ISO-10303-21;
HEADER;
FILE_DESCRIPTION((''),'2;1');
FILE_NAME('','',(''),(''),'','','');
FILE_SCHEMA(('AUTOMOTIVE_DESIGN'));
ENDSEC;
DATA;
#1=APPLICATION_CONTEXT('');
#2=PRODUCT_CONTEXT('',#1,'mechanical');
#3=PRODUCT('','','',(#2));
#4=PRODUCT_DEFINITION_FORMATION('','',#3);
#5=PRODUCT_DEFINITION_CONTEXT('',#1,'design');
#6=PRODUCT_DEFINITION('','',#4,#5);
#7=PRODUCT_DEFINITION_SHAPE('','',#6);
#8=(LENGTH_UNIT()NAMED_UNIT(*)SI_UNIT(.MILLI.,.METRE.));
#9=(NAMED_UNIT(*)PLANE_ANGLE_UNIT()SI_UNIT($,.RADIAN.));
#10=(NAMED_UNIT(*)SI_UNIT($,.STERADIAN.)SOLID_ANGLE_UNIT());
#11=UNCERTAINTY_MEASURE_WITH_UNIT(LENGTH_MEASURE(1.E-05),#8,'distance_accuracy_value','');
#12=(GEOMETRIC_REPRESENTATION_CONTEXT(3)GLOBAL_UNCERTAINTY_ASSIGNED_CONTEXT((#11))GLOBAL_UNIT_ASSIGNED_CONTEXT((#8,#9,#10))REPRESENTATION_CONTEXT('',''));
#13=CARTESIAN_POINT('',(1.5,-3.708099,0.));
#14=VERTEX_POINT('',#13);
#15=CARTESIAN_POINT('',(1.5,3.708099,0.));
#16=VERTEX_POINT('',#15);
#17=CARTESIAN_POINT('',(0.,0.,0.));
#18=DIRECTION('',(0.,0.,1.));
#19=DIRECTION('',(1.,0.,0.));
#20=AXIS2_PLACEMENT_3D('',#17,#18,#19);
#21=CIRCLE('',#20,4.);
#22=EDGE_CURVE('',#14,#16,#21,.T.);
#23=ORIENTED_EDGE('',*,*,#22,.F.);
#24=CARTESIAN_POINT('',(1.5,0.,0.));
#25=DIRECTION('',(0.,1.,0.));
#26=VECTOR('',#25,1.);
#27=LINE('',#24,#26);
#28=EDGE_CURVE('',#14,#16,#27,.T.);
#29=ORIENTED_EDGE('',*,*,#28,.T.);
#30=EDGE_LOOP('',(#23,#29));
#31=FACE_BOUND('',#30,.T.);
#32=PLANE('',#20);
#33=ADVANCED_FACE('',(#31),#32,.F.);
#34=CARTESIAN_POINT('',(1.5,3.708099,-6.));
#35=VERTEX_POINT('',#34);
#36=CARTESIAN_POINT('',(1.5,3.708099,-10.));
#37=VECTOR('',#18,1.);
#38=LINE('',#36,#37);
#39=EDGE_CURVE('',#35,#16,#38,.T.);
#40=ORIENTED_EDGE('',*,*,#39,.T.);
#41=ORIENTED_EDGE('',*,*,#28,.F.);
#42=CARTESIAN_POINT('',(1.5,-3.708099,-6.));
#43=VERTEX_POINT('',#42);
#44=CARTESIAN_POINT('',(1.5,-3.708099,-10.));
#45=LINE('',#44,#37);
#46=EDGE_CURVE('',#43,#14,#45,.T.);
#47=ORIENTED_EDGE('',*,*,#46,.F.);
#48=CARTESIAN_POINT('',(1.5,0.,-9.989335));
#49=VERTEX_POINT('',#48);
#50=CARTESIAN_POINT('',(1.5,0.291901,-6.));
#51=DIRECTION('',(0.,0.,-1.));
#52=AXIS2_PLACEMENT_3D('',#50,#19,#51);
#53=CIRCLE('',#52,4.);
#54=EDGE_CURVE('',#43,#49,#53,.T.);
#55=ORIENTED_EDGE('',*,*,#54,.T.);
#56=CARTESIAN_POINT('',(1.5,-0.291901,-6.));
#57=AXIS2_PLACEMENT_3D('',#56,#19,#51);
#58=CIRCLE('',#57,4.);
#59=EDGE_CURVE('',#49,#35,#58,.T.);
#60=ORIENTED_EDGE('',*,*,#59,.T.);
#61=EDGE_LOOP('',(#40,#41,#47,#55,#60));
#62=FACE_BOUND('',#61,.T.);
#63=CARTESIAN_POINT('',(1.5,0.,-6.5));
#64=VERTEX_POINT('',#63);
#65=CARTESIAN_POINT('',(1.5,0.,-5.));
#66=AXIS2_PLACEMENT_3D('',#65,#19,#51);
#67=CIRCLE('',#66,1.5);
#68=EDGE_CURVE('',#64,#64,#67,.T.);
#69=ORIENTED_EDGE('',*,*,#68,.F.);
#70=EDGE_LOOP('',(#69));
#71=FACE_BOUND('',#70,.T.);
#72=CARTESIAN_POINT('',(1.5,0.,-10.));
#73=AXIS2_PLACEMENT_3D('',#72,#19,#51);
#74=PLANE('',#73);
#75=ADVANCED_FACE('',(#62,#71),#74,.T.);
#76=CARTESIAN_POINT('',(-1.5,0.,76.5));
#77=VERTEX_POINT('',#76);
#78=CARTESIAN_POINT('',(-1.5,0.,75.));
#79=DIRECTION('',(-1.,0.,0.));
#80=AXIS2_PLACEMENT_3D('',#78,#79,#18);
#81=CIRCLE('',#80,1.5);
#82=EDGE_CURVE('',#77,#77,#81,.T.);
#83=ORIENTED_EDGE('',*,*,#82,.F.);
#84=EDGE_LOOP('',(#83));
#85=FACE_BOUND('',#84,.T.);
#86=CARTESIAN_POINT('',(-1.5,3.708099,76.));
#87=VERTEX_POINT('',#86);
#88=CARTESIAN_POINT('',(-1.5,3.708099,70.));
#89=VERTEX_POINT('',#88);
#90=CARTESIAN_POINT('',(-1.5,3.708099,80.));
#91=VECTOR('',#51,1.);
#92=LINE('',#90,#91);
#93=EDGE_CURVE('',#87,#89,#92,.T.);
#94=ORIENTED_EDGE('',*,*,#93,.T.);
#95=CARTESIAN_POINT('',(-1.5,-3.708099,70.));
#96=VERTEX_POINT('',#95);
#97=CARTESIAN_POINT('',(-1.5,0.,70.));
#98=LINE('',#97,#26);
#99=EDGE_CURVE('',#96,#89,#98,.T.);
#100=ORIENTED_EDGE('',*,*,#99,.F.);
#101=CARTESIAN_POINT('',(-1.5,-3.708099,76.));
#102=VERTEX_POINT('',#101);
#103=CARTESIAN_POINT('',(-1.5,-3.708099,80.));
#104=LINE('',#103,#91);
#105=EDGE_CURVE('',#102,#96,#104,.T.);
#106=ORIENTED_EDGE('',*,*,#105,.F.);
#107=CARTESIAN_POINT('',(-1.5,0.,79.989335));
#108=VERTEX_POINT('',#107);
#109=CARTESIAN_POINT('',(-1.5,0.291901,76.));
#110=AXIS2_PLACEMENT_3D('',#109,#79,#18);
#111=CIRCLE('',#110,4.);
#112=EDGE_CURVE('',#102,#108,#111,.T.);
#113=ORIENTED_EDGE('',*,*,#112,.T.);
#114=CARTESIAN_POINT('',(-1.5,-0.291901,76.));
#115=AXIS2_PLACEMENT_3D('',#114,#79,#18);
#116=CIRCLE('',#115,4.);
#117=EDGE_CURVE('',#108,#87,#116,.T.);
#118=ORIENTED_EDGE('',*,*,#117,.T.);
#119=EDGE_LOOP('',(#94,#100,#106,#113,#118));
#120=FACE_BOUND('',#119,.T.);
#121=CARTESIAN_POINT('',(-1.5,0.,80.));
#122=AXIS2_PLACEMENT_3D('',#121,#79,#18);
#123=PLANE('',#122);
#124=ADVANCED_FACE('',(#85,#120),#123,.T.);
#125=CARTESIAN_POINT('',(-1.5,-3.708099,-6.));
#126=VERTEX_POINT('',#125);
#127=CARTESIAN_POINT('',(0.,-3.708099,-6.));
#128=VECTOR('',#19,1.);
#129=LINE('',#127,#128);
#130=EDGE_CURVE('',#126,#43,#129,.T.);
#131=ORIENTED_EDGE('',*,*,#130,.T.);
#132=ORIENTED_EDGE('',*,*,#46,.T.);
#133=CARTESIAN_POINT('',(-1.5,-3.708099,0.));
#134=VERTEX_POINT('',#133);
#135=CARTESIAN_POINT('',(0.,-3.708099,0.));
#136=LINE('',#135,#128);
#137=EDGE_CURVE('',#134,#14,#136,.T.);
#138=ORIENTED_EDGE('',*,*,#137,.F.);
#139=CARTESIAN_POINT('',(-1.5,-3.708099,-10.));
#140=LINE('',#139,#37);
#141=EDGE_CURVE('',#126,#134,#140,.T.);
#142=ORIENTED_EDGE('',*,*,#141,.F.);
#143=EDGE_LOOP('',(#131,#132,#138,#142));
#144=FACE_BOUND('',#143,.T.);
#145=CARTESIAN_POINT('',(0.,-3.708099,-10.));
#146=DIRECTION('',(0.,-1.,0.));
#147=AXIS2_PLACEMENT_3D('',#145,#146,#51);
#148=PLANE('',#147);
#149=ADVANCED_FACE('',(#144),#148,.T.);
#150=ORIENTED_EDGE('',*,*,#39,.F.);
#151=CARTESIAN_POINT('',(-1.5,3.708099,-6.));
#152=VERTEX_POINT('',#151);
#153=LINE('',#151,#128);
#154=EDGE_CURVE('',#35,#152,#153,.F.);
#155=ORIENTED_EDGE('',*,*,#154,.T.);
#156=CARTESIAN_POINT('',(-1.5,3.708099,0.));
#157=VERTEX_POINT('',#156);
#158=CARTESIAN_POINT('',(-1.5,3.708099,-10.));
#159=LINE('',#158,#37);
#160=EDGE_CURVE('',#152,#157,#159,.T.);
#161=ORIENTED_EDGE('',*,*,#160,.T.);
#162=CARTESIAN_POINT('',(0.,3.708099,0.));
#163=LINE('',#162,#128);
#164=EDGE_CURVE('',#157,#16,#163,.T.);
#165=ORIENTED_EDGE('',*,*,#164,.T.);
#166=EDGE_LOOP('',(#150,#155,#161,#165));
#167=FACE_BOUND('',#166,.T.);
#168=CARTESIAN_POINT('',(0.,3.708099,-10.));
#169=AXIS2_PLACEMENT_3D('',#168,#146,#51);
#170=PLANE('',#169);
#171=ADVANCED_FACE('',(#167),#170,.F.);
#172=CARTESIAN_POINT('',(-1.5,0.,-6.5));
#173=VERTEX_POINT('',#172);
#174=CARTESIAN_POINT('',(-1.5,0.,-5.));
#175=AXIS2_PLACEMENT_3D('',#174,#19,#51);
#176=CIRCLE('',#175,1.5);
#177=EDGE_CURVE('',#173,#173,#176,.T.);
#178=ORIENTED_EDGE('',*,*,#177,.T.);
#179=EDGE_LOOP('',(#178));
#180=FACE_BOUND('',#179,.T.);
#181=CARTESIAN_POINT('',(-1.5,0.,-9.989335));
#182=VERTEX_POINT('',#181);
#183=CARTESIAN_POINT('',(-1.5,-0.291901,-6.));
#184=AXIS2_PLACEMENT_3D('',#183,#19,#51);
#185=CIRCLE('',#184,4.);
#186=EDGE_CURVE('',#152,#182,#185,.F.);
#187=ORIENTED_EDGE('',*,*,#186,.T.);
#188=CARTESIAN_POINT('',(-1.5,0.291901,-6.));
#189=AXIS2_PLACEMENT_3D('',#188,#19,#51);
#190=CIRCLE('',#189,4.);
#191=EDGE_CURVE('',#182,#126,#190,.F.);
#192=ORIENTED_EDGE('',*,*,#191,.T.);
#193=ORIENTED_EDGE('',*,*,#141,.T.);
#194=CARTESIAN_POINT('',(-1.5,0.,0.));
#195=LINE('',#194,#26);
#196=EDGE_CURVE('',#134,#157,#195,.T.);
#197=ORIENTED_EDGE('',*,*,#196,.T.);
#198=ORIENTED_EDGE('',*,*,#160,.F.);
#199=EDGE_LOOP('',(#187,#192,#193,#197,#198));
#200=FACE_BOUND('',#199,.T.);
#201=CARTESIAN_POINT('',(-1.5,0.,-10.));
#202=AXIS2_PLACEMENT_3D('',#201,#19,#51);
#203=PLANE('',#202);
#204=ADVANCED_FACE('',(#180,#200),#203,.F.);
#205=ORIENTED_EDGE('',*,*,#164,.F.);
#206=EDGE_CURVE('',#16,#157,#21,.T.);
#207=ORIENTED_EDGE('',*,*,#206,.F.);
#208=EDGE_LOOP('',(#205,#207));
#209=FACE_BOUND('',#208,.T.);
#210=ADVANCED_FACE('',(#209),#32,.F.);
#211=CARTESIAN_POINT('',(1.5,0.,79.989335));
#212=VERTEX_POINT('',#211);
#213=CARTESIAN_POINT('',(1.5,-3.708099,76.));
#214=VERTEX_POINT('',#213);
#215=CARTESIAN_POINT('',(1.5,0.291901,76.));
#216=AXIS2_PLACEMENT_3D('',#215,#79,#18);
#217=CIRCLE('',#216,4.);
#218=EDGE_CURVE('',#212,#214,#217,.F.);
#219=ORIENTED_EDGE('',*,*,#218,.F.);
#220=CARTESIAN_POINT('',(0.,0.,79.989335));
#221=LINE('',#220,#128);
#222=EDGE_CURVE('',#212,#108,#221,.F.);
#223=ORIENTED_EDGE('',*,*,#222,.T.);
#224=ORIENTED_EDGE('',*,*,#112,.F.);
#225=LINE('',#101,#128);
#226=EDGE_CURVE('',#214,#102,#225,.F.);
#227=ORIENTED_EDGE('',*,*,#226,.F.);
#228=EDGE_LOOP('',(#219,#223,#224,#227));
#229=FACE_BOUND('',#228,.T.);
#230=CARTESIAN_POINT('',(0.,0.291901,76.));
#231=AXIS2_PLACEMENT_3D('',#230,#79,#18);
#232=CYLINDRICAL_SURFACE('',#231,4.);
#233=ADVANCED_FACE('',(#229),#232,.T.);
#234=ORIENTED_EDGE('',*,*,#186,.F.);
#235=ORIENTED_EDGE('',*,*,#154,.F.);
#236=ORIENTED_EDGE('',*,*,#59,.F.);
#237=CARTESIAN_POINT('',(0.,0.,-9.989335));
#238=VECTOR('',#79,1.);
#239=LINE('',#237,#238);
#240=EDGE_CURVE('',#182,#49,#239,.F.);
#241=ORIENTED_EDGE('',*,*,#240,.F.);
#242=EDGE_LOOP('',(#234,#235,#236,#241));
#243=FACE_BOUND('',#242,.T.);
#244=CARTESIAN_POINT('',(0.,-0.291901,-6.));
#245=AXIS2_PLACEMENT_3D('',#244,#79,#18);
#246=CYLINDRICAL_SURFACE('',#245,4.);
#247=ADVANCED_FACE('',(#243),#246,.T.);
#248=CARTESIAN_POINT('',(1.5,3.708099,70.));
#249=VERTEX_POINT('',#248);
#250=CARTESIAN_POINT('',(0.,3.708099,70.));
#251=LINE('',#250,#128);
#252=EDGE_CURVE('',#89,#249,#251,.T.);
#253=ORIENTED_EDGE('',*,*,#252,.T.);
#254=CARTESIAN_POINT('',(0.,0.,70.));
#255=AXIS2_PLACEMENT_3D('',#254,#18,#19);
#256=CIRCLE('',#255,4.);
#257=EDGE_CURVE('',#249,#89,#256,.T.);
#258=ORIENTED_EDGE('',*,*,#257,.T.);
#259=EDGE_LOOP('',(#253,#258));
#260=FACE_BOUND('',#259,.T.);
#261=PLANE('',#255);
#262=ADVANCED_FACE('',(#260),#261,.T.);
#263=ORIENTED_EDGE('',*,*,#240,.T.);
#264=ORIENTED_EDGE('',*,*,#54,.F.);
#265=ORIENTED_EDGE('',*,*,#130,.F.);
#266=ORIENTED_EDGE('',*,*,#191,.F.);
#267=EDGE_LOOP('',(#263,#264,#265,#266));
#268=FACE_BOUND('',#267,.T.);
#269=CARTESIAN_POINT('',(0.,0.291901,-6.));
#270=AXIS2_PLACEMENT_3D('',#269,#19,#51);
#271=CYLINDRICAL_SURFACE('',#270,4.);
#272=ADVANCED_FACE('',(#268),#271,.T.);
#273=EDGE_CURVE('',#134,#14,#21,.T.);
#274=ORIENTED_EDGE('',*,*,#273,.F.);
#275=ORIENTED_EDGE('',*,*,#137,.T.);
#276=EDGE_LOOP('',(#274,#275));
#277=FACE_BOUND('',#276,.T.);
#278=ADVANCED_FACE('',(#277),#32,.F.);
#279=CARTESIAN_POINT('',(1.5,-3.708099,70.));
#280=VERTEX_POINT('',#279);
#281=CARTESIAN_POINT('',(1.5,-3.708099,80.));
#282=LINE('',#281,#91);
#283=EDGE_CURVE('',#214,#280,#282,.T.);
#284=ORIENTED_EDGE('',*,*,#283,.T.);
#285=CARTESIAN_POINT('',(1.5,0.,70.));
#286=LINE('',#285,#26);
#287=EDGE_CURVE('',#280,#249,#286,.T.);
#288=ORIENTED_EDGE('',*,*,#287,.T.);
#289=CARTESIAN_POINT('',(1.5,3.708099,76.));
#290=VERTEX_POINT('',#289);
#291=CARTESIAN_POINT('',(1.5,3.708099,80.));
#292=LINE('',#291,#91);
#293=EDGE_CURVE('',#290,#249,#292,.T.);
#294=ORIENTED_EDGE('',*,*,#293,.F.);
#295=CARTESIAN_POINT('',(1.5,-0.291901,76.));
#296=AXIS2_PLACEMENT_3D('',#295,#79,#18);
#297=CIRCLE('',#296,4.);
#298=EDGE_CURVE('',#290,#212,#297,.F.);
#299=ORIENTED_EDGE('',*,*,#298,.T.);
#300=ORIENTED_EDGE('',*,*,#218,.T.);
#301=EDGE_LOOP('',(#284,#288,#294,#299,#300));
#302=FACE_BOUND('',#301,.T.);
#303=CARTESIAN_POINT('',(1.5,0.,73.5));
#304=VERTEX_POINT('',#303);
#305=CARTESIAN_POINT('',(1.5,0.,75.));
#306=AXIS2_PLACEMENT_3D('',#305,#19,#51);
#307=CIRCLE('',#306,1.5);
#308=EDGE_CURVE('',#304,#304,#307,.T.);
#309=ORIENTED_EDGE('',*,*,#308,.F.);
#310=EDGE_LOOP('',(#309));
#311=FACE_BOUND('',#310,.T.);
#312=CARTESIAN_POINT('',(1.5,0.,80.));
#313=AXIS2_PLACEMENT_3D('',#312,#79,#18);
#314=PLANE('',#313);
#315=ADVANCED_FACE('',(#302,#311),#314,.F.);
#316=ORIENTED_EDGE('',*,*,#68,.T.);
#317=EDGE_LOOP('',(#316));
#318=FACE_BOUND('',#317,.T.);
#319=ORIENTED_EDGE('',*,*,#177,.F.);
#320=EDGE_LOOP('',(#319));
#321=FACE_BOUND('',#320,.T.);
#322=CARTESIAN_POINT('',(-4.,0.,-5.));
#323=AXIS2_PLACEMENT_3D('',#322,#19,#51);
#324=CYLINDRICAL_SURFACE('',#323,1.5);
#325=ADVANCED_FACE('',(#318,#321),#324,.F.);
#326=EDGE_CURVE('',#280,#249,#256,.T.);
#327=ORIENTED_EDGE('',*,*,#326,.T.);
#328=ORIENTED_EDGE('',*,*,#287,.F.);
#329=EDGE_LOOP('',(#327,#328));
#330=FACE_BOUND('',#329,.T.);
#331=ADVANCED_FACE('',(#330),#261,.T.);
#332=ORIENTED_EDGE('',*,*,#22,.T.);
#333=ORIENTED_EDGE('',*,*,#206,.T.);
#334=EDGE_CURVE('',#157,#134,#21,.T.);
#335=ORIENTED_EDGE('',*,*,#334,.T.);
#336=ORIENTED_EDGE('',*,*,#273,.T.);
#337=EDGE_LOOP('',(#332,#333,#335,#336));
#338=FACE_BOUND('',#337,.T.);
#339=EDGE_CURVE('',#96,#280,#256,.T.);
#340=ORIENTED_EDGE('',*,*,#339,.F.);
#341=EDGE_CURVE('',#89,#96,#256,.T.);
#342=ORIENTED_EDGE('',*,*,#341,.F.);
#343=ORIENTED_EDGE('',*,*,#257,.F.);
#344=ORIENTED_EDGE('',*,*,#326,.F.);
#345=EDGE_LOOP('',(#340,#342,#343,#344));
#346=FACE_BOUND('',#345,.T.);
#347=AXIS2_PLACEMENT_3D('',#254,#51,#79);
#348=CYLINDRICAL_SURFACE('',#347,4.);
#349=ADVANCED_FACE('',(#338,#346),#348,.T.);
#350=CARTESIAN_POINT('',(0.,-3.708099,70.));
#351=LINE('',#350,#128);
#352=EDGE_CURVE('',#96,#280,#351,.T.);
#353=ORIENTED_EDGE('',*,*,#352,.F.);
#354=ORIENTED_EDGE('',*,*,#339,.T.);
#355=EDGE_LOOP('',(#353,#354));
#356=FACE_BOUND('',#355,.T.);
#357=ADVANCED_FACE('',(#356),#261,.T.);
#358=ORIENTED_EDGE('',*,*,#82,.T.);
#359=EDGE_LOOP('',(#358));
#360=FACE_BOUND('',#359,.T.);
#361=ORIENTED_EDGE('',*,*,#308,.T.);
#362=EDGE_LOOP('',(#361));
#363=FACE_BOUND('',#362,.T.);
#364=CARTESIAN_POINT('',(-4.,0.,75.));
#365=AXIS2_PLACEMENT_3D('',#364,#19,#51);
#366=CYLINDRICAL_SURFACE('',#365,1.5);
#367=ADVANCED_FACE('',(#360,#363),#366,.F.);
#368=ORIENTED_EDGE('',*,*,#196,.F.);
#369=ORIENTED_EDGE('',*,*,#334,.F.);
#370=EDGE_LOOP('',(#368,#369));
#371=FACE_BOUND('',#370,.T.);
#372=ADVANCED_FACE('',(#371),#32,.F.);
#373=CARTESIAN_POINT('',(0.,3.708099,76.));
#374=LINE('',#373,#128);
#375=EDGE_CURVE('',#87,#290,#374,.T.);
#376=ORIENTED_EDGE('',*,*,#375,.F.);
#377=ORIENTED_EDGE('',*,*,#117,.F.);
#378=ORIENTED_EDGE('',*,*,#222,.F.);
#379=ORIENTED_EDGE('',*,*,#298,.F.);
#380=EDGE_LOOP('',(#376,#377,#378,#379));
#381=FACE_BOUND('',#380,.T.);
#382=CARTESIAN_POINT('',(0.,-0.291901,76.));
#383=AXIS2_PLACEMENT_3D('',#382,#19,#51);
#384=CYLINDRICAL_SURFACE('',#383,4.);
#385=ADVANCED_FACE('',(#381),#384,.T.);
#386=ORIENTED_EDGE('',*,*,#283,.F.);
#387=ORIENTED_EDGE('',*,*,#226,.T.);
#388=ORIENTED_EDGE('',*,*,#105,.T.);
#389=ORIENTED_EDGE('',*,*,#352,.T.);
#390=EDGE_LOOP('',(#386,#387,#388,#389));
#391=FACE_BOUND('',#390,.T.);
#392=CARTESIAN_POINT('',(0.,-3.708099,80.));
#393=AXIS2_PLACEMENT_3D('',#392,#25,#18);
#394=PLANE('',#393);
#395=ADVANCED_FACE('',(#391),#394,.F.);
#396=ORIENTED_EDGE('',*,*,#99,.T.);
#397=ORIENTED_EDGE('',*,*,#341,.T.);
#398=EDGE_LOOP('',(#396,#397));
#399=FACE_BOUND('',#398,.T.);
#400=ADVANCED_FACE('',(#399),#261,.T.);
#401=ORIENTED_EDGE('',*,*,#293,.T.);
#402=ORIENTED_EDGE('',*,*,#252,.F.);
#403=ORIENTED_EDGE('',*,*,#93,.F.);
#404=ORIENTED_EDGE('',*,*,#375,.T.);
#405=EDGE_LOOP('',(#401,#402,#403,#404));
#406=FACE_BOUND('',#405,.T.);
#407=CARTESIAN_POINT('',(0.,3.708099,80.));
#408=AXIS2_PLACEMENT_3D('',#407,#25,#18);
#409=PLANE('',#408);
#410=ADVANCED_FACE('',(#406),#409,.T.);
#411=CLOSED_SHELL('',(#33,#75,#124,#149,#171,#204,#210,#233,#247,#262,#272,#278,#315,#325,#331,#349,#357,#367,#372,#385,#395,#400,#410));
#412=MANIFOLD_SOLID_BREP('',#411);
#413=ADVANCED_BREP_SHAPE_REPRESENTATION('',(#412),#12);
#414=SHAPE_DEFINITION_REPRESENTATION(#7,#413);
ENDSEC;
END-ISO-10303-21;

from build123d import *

# Parameters (mm, degrees)
CROQUIS2_R              = 4
SALIENTE_EXTRUIR1_DEPTH = 70
CROQUIS3_W              = 3
CROQUIS3_H              = 7.416198488
SALIENTE_EXTRUIR2_DEPTH = 10
CROQUIS4_W              = 3
CROQUIS4_H              = 7.416198488
SALIENTE_EXTRUIR3_DEPTH = 10
CROQUIS5_R              = 1.5
CORTAR_EXTRUIR1_DEPTH   = 81.288542146
REDONDEO1_R             = 4


with BuildPart() as part:
    # Croquis2 → Saliente-Extruir1 (new body)
    with BuildSketch(Plane.XY):
        Circle(CROQUIS2_R)
    extrude(amount=SALIENTE_EXTRUIR1_DEPTH)

    # Croquis3 → Saliente-Extruir2 (add)
    with BuildSketch(Plane.XY.offset(70)):
        Rectangle(CROQUIS3_W, CROQUIS3_H)
    extrude(amount=SALIENTE_EXTRUIR2_DEPTH)

    # Croquis4 → Saliente-Extruir3 (add)
    with BuildSketch(Plane(origin=(0, 0, 0), x_dir=(-1, 0, 0), z_dir=(0, 0, -1))):
        Rectangle(CROQUIS4_W, CROQUIS4_H)
    extrude(amount=SALIENTE_EXTRUIR3_DEPTH)

    # Croquis5 → Cortar-Extruir1 (cut, through all)
    with BuildSketch(Plane(origin=(1.5, 0, 0), x_dir=(0, 0, -1), z_dir=(1, 0, 0))):
        with Locations((-75, 0)):
            Circle(CROQUIS5_R)
        with Locations((5, 0)):
            Circle(CROQUIS5_R)
    extrude(amount=-CORTAR_EXTRUIR1_DEPTH, mode=Mode.SUBTRACT)

    # Redondeo1
    # the kernel refuses this fillet: 4 mm, written as the material it takes off along each edge
    with BuildSketch(Plane(origin=(-11.5, -3.708099244, -10), x_dir=(0, 0, 1), z_dir=(1, 0, 0)), Plane(origin=(11.5, 3.708099244, -10), x_dir=(0, 0, 1), z_dir=(-1, 0, 0))) as redondeo1_piece_1:
        with BuildLine():
            CenterArc((REDONDEO1_R, -REDONDEO1_R), REDONDEO1_R, 90, 90)
            Line((0, -REDONDEO1_R), (0, 0))
            Line((0, 0), (REDONDEO1_R, 0))
        make_face()
    extrude(amount=23, mode=Mode.SUBTRACT)
    with BuildSketch(Plane(origin=(-11.5, -3.708099244, 80), x_dir=(0, 0, -1), z_dir=(1, 0, 0)), Plane(origin=(11.5, 3.708099244, 80), x_dir=(0, 0, -1), z_dir=(-1, 0, 0))) as redondeo1_piece_2:
        with BuildLine():
            CenterArc((REDONDEO1_R, REDONDEO1_R), REDONDEO1_R, 180, 90)
            Line((0, REDONDEO1_R), (0, 0))
            Line((0, 0), (REDONDEO1_R, 0))
        make_face()
    extrude(amount=23, mode=Mode.SUBTRACT)


solid = part.part
